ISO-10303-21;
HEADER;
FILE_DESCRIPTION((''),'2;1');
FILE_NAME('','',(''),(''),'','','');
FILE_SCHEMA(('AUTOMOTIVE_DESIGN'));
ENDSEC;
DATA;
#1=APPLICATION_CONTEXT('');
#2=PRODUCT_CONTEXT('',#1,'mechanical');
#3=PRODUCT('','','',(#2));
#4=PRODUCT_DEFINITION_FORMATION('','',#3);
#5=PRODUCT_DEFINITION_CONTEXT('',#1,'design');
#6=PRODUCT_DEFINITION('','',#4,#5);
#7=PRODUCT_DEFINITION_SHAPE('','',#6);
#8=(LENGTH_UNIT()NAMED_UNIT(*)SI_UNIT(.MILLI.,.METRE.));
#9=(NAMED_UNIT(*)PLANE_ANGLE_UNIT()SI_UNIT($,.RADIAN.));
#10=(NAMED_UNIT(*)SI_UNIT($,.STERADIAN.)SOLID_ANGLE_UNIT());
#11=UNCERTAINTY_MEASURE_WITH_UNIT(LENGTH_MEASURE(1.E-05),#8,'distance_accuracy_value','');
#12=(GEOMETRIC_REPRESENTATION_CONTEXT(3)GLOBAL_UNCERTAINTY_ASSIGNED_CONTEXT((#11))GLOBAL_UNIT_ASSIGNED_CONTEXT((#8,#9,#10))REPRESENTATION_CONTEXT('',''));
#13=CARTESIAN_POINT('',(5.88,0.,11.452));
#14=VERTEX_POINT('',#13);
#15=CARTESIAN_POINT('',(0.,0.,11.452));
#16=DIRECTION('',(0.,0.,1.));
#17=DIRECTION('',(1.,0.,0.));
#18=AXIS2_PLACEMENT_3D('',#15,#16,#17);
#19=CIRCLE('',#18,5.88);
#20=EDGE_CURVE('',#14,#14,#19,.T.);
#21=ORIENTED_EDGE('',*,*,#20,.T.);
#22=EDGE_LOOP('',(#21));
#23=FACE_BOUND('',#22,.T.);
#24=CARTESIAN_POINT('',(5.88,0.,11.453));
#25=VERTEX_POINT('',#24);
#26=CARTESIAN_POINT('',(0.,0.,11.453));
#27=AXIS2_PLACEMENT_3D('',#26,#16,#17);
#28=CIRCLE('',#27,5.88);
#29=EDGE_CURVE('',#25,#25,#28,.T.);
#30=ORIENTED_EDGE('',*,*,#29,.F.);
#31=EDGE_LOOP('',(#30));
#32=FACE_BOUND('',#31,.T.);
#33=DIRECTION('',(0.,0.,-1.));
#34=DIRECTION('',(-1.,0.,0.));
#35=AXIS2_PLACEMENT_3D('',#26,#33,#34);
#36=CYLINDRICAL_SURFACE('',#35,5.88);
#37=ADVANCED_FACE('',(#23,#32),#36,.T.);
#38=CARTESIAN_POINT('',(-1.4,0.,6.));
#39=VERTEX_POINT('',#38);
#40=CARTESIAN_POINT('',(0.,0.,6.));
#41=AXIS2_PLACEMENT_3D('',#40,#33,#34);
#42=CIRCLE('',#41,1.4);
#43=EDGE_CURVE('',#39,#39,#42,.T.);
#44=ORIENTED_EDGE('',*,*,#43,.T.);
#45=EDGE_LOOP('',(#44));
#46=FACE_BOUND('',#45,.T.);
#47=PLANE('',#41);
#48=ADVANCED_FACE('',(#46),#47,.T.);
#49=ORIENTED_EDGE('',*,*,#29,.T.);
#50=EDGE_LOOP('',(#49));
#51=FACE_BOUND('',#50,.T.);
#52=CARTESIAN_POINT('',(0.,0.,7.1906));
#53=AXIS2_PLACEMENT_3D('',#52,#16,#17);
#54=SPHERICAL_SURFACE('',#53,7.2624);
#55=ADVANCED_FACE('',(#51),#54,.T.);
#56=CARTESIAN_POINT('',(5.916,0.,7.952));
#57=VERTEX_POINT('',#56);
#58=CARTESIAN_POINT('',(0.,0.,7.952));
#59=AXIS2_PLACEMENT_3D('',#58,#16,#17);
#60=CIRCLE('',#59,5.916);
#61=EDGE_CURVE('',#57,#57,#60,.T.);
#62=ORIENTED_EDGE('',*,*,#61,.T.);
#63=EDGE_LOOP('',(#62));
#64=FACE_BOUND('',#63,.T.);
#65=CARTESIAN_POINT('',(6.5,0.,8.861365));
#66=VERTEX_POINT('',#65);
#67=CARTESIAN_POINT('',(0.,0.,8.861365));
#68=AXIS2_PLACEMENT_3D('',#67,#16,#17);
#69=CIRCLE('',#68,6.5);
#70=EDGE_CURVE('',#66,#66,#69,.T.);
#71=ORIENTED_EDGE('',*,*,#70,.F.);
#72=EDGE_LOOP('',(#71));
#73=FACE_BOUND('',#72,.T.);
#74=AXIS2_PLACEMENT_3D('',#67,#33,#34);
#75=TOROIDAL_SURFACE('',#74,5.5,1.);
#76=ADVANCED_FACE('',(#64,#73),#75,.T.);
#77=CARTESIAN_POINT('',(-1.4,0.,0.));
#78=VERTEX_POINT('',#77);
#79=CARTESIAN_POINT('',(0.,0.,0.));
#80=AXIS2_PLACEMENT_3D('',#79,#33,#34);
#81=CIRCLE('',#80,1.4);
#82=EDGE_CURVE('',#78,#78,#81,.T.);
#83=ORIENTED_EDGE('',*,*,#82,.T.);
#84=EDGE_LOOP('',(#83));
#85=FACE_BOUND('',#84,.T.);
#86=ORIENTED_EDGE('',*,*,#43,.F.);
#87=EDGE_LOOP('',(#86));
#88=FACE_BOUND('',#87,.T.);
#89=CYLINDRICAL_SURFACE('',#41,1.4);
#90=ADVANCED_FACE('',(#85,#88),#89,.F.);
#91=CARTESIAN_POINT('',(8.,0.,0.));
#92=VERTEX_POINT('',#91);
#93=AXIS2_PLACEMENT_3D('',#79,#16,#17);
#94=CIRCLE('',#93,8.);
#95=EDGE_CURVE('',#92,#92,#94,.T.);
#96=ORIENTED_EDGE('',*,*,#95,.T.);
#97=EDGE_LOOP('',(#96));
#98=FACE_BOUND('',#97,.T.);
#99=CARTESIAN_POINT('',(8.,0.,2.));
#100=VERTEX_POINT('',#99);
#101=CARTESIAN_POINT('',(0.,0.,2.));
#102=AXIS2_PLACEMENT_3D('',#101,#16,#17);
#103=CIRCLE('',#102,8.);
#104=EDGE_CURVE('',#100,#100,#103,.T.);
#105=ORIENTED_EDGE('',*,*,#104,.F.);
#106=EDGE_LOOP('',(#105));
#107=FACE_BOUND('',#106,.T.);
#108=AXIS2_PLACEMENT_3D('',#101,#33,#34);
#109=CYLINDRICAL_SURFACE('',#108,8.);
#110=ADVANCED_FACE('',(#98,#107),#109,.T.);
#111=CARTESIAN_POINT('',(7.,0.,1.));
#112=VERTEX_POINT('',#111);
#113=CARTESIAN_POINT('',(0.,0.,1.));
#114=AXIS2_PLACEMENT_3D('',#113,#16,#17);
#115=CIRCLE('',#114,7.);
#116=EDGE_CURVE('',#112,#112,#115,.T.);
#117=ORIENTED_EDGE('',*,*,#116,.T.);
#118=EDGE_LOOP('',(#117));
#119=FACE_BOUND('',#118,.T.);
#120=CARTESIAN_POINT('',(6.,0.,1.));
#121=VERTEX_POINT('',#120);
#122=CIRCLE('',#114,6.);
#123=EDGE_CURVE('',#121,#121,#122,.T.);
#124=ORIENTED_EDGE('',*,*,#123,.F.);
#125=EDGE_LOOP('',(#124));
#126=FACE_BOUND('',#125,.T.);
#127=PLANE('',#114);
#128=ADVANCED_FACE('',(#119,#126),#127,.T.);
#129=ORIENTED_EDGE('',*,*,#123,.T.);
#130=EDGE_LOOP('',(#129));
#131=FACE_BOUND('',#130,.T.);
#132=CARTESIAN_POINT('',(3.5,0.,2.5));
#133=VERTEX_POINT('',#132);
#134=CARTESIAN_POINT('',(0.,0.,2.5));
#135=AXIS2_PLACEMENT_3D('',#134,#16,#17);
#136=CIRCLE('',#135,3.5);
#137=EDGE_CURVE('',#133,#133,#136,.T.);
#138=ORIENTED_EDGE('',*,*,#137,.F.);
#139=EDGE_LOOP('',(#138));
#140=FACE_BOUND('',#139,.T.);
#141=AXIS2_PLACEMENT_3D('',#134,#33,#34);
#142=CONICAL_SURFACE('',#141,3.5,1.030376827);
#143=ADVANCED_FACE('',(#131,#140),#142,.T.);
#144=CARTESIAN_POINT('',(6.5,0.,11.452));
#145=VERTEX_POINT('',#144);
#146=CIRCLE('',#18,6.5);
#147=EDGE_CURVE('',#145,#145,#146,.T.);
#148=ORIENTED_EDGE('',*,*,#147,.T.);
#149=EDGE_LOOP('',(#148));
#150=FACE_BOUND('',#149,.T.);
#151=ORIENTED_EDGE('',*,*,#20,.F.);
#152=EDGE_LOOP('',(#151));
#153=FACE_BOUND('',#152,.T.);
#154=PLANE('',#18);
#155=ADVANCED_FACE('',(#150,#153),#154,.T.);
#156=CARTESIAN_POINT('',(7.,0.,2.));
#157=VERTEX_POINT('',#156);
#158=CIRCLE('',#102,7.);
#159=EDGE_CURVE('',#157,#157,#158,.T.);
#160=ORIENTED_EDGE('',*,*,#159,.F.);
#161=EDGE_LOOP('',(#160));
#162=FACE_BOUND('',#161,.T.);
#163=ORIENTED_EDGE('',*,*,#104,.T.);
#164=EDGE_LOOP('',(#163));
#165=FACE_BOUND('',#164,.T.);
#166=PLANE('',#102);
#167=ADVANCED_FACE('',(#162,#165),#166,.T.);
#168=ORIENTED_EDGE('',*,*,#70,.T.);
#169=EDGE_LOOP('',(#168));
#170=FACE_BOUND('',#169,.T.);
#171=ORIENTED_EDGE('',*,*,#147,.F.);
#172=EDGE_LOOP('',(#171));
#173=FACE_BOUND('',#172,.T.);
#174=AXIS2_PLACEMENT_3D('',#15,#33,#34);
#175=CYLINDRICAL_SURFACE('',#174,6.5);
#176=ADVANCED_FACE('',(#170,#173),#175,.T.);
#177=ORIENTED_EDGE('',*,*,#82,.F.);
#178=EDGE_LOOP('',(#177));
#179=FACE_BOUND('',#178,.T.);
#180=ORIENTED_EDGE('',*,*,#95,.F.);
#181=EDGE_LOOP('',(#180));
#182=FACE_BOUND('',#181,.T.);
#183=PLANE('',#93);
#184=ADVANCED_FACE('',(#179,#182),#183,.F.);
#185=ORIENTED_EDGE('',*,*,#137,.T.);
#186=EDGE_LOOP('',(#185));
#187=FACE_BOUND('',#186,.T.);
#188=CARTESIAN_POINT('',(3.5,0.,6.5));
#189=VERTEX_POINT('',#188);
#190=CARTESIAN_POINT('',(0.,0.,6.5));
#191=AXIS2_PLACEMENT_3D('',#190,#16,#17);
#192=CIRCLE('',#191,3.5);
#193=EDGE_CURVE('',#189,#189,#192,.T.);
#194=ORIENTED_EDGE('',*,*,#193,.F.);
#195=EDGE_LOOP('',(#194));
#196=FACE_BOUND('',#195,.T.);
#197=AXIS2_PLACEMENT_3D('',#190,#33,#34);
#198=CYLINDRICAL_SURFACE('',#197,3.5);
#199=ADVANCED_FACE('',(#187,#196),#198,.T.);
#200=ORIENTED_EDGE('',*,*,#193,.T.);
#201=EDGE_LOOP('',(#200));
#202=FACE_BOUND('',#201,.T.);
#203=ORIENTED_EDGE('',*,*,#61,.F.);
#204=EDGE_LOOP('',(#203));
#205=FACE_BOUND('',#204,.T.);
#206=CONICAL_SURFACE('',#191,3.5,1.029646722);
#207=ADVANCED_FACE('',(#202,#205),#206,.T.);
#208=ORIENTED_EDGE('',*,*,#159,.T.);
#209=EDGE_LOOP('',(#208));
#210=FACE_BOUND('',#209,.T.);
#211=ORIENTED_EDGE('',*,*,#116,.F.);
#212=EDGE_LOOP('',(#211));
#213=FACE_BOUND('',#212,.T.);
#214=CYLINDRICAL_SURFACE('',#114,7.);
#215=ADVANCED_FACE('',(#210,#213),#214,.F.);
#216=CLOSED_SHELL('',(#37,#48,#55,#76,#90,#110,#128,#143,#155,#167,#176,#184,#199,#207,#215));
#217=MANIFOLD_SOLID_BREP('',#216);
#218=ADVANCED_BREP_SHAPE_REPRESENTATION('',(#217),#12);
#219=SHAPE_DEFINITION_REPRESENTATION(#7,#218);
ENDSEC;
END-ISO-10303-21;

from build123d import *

# Parameters (mm, degrees)
CROQUIS2_R              = 8
SALIENTE_EXTRUIR1_DEPTH = 2
CROQUIS3_R              = 7
CORTAR_EXTRUIR1_DEPTH   = 1
CROQUIS4_R              = 6
CROQUIS5_R              = 3.5
CROQUIS6_R              = 3.5
SALIENTE_EXTRUIR2_DEPTH = 4
CROQUIS9_R              = 3.5
CROQUIS10_R             = 5.916
CROQUIS11_R             = 6.5
SALIENTE_EXTRUIR3_DEPTH = 3.5
REDONDEO2_R             = 1
CROQUIS15_R             = 5.88
SALIENTE_EXTRUIR4_DEPTH = 0.001
C_PULA1_FACE_RADIUS     = 5.88
C_PULA1_HEIGHT          = 3
CROQUIS16_R             = 1.4
CORTAR_EXTRUIR2_DEPTH   = 6


with BuildPart() as part:
    # Croquis2 → Saliente-Extruir1 (new body)
    with BuildSketch(Plane.XY):
        Circle(CROQUIS2_R)
    extrude(amount=SALIENTE_EXTRUIR1_DEPTH)

    # Croquis3 → Cortar-Extruir1 (cut)
    with BuildSketch(Plane.XY.offset(2)):
        Circle(CROQUIS3_R)
    extrude(amount=-CORTAR_EXTRUIR1_DEPTH, mode=Mode.SUBTRACT)

    # Croquis4 → Recubrir1 section 0
    with BuildSketch(Plane.XY.offset(1)):
        Circle(CROQUIS4_R)
    # Croquis5 → Recubrir1 section 1
    with BuildSketch(Plane.XY.offset(2.5)):
        Circle(CROQUIS5_R)
    loft()

    # Croquis6 → Saliente-Extruir2 (add)
    with BuildSketch(Plane.XY.offset(2.5)):
        Circle(CROQUIS6_R)
    extrude(amount=SALIENTE_EXTRUIR2_DEPTH)

    # Croquis9 → Recubrir3 section 0
    with BuildSketch(Plane.XY.offset(6.5)):
        Circle(CROQUIS9_R)
    # Croquis10 → Recubrir3 section 1
    with BuildSketch(Plane.XY.offset(7.952)):
        Circle(CROQUIS10_R)
    loft()

    # Croquis11 → Saliente-Extruir3 (add)
    with BuildSketch(Plane.XY.offset(7.952)):
        Circle(CROQUIS11_R)
    extrude(amount=SALIENTE_EXTRUIR3_DEPTH)

    # Redondeo2
    # the kernel refuses this fillet: 1 mm, written as the material it takes off along each edge
    with BuildSketch(Plane(origin=(0, 0, 7.952), x_dir=(1, 0, 0), z_dir=(0, -1, 0))) as redondeo2_piece_1:
        with BuildLine():
            CenterArc((5.5, 0.909364613), REDONDEO2_R, 294.582307044, 65.417692956)
            Line((5.916, 0), (5.92432, -0.018187292))
            ThreePointArc((5.92432, -0.018187292), (6.208, -0.02), (6.5, -0.02))
            Line((6.5, -0.02), (6.52, 0))
            Line((6.52, 0), (6.52, 0.909364613))
            Line((6.52, 0.909364613), (6.5, 0.909364613))
        make_face()
    revolve(axis=Axis((0, 0, 7.952), (0, 0, 1)), mode=Mode.SUBTRACT)

    # Croquis15 → Saliente-Extruir4 (add)
    with BuildSketch(Plane.XY.offset(11.452)):
        Circle(CROQUIS15_R)
    extrude(amount=SALIENTE_EXTRUIR4_DEPTH)

    # Cúpula1: a dome of height H over a round flat face of radius A is a cap of a sphere of radius (A * A + H * H) / (2 * H)
    c_pula1_r = (C_PULA1_FACE_RADIUS * C_PULA1_FACE_RADIUS + C_PULA1_HEIGHT * C_PULA1_HEIGHT) / (2 * C_PULA1_HEIGHT)
    c_pula1_base = Plane((0, 0, 11.453), z_dir=(0, 0, 1))
    with Locations(c_pula1_base.offset(C_PULA1_HEIGHT - c_pula1_r)):
        c_pula1_ball = Sphere(c_pula1_r, mode=Mode.PRIVATE)
    add(split(c_pula1_ball, bisect_by=c_pula1_base, keep=Keep.TOP, mode=Mode.PRIVATE))

    # Croquis16 → Cortar-Extruir2 (cut)
    with BuildSketch(Plane(origin=(0, 0, 0), x_dir=(-1, 0, 0), z_dir=(0, 0, -1))):
        Circle(CROQUIS16_R)
    extrude(amount=-CORTAR_EXTRUIR2_DEPTH, mode=Mode.SUBTRACT)


solid = part.part
